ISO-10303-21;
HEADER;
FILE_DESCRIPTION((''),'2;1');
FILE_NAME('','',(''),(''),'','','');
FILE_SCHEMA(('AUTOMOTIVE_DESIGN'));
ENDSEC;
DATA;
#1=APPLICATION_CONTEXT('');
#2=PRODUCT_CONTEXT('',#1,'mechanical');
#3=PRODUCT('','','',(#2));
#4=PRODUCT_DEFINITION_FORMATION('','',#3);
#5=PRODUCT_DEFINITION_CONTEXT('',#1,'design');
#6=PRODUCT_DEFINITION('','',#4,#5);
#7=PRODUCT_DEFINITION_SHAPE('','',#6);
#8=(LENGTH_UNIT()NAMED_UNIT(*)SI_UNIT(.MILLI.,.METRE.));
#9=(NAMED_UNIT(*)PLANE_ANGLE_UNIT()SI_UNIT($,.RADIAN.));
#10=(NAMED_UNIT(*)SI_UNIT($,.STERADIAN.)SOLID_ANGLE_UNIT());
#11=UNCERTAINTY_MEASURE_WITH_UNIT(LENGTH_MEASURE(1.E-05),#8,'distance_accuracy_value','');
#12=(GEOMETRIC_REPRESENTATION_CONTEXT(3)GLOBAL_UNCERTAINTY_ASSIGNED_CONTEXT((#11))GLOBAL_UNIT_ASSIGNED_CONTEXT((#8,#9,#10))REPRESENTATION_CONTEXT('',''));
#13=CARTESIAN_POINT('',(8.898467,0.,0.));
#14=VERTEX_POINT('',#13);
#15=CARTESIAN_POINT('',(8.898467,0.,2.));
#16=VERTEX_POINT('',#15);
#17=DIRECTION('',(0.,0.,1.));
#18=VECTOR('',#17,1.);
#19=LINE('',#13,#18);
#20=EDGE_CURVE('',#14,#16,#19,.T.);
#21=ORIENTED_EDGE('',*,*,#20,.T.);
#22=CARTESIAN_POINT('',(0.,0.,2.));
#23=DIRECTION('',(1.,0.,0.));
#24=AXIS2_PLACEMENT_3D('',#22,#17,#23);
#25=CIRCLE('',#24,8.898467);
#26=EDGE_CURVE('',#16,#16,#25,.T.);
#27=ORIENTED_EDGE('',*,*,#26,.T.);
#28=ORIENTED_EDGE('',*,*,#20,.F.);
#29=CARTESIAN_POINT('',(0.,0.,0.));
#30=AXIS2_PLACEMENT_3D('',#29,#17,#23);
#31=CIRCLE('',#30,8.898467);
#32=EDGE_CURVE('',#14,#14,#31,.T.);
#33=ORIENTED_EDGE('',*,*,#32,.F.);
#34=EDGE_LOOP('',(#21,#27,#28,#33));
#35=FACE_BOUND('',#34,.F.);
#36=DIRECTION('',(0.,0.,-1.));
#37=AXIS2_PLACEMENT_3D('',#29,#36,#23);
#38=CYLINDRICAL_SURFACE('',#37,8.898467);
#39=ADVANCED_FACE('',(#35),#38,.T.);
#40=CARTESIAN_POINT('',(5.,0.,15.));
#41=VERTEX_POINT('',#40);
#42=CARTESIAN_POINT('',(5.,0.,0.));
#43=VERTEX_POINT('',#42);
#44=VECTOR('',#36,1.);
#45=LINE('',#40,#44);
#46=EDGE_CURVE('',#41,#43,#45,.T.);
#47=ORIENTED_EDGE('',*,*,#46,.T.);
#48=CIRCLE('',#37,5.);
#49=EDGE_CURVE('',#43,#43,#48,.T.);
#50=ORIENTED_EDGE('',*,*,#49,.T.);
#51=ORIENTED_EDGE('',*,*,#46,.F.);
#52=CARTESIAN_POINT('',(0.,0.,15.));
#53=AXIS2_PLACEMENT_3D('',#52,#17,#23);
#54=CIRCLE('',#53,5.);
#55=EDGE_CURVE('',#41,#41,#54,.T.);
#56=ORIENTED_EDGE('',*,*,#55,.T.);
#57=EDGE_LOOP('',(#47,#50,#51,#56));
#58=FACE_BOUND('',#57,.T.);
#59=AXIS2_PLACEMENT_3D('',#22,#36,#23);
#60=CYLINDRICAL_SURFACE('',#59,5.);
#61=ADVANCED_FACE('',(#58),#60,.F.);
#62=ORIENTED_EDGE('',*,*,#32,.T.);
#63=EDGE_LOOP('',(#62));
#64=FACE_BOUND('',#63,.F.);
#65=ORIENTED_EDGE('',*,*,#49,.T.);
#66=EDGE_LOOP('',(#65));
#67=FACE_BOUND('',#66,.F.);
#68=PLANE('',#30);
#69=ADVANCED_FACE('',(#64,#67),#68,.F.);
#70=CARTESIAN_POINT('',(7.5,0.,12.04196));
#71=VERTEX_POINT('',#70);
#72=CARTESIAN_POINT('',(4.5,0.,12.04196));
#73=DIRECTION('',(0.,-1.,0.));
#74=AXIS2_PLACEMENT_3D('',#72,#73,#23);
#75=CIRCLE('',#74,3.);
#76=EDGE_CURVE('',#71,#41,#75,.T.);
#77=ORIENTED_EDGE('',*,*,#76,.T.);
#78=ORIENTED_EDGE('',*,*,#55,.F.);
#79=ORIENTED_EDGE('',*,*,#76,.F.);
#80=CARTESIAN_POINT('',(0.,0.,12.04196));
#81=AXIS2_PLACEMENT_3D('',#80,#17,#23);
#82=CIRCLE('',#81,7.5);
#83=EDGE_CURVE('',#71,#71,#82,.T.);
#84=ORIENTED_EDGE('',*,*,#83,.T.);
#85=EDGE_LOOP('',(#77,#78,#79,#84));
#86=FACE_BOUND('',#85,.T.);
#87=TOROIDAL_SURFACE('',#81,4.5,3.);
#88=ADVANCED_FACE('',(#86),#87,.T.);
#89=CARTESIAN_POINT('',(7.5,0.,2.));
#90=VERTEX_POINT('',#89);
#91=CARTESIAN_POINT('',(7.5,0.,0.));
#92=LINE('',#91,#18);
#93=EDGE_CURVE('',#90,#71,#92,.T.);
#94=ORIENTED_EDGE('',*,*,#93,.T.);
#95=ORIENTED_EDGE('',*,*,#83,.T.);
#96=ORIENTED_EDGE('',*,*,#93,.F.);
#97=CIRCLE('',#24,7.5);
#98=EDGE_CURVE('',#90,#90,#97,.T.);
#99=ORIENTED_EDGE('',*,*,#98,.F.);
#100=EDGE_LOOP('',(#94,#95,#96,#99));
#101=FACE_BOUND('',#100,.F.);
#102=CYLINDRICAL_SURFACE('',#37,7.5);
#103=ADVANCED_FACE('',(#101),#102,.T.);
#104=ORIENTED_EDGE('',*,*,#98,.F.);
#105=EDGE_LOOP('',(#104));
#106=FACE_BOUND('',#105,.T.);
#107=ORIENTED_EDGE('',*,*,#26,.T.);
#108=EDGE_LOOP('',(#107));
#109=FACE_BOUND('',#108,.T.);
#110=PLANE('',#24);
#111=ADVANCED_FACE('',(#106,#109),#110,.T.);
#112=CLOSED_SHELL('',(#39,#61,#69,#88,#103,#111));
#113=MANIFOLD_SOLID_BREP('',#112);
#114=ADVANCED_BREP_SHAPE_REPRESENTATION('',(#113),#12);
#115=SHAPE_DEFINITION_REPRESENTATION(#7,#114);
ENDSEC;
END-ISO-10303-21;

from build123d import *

# Parameters (mm, degrees)
F0_R     = 7.5
F1_DEPTH = 15
F2_R     = 8.8984666771
F2_R_2   = 7.5
F3_DEPTH = 2
F4_T     = 2.5


# Not quite as in the source:
# - a fillet or chamfer that OpenCascade refuses, or shapes differently, is made with other operations: its cross-section is extruded or revolved along the edge and cut away or added
# - a shell that OpenCascade refuses in one call is made with other operations: the cavity is built on its own and cut out


with BuildPart() as f1:
    # F0 (on Top) → F1 (new body)
    with BuildSketch(Plane.XY):
        Circle(F0_R)
    extrude(amount=F1_DEPTH)

    # F2 (on face) → F3 (join)
    with BuildSketch(Plane.XY):
        Circle(F2_R)
        Circle(F2_R_2, mode=Mode.SUBTRACT)
    extrude(amount=F3_DEPTH)

    # F4: shell of thickness 2.5, made by hand


with BuildPart() as f4_core1:
    # F4_t2: copy of F1
    add(f1.part)

    # the walls: a layer under each face that stays
    f4_faces = [f4_core1.faces().sort_by_distance(p)[0] for p in [
        (-7.5, 0, 8.5),
        (-5.9323111181, -5.9323111181, 2),
        (-8.8984666771, 0, 1),
    ]]
    thicken(f4_faces, amount=-F4_T, mode=Mode.SUBTRACT)

    # F4_s3 → F4_t4 (revolve, cut)
    with BuildSketch(Plane.XZ):
        Polygon((7.525, 2.025), (5, 2), (5, -0.5), (7.5, -0.5), align=None)
    revolve(axis=Axis((0, 0, 2), (0, 0, 1)), mode=Mode.SUBTRACT)


with BuildPart() as f1_1:
    add(f1.part)

    # what is left inside the walls is the cavity
    f4_cavity = [f4_core1.part.solids().sort_by_distance(p)[0] for p in [
        (-4.975, 0, 10),
    ]]
    add(f4_cavity, mode=Mode.SUBTRACT)

    # F5: fillet of radius 3 on 1 edges, made by hand

    # F5_s1 → F5_t2 (revolve, cut)
    with BuildSketch(Plane.XZ):
        with BuildLine():
            ThreePointArc((7.5, 12.0419601084), (6.7912878475, 13.9784517816), (5, 15))
            Line((5, 15), (7.5, 15))
            Line((7.5, 15), (7.5, 12.0419601084))
        make_face()
    revolve(axis=Axis((0, 0, 15), (0, 0, 1)), mode=Mode.SUBTRACT)


solid = f1_1.part
